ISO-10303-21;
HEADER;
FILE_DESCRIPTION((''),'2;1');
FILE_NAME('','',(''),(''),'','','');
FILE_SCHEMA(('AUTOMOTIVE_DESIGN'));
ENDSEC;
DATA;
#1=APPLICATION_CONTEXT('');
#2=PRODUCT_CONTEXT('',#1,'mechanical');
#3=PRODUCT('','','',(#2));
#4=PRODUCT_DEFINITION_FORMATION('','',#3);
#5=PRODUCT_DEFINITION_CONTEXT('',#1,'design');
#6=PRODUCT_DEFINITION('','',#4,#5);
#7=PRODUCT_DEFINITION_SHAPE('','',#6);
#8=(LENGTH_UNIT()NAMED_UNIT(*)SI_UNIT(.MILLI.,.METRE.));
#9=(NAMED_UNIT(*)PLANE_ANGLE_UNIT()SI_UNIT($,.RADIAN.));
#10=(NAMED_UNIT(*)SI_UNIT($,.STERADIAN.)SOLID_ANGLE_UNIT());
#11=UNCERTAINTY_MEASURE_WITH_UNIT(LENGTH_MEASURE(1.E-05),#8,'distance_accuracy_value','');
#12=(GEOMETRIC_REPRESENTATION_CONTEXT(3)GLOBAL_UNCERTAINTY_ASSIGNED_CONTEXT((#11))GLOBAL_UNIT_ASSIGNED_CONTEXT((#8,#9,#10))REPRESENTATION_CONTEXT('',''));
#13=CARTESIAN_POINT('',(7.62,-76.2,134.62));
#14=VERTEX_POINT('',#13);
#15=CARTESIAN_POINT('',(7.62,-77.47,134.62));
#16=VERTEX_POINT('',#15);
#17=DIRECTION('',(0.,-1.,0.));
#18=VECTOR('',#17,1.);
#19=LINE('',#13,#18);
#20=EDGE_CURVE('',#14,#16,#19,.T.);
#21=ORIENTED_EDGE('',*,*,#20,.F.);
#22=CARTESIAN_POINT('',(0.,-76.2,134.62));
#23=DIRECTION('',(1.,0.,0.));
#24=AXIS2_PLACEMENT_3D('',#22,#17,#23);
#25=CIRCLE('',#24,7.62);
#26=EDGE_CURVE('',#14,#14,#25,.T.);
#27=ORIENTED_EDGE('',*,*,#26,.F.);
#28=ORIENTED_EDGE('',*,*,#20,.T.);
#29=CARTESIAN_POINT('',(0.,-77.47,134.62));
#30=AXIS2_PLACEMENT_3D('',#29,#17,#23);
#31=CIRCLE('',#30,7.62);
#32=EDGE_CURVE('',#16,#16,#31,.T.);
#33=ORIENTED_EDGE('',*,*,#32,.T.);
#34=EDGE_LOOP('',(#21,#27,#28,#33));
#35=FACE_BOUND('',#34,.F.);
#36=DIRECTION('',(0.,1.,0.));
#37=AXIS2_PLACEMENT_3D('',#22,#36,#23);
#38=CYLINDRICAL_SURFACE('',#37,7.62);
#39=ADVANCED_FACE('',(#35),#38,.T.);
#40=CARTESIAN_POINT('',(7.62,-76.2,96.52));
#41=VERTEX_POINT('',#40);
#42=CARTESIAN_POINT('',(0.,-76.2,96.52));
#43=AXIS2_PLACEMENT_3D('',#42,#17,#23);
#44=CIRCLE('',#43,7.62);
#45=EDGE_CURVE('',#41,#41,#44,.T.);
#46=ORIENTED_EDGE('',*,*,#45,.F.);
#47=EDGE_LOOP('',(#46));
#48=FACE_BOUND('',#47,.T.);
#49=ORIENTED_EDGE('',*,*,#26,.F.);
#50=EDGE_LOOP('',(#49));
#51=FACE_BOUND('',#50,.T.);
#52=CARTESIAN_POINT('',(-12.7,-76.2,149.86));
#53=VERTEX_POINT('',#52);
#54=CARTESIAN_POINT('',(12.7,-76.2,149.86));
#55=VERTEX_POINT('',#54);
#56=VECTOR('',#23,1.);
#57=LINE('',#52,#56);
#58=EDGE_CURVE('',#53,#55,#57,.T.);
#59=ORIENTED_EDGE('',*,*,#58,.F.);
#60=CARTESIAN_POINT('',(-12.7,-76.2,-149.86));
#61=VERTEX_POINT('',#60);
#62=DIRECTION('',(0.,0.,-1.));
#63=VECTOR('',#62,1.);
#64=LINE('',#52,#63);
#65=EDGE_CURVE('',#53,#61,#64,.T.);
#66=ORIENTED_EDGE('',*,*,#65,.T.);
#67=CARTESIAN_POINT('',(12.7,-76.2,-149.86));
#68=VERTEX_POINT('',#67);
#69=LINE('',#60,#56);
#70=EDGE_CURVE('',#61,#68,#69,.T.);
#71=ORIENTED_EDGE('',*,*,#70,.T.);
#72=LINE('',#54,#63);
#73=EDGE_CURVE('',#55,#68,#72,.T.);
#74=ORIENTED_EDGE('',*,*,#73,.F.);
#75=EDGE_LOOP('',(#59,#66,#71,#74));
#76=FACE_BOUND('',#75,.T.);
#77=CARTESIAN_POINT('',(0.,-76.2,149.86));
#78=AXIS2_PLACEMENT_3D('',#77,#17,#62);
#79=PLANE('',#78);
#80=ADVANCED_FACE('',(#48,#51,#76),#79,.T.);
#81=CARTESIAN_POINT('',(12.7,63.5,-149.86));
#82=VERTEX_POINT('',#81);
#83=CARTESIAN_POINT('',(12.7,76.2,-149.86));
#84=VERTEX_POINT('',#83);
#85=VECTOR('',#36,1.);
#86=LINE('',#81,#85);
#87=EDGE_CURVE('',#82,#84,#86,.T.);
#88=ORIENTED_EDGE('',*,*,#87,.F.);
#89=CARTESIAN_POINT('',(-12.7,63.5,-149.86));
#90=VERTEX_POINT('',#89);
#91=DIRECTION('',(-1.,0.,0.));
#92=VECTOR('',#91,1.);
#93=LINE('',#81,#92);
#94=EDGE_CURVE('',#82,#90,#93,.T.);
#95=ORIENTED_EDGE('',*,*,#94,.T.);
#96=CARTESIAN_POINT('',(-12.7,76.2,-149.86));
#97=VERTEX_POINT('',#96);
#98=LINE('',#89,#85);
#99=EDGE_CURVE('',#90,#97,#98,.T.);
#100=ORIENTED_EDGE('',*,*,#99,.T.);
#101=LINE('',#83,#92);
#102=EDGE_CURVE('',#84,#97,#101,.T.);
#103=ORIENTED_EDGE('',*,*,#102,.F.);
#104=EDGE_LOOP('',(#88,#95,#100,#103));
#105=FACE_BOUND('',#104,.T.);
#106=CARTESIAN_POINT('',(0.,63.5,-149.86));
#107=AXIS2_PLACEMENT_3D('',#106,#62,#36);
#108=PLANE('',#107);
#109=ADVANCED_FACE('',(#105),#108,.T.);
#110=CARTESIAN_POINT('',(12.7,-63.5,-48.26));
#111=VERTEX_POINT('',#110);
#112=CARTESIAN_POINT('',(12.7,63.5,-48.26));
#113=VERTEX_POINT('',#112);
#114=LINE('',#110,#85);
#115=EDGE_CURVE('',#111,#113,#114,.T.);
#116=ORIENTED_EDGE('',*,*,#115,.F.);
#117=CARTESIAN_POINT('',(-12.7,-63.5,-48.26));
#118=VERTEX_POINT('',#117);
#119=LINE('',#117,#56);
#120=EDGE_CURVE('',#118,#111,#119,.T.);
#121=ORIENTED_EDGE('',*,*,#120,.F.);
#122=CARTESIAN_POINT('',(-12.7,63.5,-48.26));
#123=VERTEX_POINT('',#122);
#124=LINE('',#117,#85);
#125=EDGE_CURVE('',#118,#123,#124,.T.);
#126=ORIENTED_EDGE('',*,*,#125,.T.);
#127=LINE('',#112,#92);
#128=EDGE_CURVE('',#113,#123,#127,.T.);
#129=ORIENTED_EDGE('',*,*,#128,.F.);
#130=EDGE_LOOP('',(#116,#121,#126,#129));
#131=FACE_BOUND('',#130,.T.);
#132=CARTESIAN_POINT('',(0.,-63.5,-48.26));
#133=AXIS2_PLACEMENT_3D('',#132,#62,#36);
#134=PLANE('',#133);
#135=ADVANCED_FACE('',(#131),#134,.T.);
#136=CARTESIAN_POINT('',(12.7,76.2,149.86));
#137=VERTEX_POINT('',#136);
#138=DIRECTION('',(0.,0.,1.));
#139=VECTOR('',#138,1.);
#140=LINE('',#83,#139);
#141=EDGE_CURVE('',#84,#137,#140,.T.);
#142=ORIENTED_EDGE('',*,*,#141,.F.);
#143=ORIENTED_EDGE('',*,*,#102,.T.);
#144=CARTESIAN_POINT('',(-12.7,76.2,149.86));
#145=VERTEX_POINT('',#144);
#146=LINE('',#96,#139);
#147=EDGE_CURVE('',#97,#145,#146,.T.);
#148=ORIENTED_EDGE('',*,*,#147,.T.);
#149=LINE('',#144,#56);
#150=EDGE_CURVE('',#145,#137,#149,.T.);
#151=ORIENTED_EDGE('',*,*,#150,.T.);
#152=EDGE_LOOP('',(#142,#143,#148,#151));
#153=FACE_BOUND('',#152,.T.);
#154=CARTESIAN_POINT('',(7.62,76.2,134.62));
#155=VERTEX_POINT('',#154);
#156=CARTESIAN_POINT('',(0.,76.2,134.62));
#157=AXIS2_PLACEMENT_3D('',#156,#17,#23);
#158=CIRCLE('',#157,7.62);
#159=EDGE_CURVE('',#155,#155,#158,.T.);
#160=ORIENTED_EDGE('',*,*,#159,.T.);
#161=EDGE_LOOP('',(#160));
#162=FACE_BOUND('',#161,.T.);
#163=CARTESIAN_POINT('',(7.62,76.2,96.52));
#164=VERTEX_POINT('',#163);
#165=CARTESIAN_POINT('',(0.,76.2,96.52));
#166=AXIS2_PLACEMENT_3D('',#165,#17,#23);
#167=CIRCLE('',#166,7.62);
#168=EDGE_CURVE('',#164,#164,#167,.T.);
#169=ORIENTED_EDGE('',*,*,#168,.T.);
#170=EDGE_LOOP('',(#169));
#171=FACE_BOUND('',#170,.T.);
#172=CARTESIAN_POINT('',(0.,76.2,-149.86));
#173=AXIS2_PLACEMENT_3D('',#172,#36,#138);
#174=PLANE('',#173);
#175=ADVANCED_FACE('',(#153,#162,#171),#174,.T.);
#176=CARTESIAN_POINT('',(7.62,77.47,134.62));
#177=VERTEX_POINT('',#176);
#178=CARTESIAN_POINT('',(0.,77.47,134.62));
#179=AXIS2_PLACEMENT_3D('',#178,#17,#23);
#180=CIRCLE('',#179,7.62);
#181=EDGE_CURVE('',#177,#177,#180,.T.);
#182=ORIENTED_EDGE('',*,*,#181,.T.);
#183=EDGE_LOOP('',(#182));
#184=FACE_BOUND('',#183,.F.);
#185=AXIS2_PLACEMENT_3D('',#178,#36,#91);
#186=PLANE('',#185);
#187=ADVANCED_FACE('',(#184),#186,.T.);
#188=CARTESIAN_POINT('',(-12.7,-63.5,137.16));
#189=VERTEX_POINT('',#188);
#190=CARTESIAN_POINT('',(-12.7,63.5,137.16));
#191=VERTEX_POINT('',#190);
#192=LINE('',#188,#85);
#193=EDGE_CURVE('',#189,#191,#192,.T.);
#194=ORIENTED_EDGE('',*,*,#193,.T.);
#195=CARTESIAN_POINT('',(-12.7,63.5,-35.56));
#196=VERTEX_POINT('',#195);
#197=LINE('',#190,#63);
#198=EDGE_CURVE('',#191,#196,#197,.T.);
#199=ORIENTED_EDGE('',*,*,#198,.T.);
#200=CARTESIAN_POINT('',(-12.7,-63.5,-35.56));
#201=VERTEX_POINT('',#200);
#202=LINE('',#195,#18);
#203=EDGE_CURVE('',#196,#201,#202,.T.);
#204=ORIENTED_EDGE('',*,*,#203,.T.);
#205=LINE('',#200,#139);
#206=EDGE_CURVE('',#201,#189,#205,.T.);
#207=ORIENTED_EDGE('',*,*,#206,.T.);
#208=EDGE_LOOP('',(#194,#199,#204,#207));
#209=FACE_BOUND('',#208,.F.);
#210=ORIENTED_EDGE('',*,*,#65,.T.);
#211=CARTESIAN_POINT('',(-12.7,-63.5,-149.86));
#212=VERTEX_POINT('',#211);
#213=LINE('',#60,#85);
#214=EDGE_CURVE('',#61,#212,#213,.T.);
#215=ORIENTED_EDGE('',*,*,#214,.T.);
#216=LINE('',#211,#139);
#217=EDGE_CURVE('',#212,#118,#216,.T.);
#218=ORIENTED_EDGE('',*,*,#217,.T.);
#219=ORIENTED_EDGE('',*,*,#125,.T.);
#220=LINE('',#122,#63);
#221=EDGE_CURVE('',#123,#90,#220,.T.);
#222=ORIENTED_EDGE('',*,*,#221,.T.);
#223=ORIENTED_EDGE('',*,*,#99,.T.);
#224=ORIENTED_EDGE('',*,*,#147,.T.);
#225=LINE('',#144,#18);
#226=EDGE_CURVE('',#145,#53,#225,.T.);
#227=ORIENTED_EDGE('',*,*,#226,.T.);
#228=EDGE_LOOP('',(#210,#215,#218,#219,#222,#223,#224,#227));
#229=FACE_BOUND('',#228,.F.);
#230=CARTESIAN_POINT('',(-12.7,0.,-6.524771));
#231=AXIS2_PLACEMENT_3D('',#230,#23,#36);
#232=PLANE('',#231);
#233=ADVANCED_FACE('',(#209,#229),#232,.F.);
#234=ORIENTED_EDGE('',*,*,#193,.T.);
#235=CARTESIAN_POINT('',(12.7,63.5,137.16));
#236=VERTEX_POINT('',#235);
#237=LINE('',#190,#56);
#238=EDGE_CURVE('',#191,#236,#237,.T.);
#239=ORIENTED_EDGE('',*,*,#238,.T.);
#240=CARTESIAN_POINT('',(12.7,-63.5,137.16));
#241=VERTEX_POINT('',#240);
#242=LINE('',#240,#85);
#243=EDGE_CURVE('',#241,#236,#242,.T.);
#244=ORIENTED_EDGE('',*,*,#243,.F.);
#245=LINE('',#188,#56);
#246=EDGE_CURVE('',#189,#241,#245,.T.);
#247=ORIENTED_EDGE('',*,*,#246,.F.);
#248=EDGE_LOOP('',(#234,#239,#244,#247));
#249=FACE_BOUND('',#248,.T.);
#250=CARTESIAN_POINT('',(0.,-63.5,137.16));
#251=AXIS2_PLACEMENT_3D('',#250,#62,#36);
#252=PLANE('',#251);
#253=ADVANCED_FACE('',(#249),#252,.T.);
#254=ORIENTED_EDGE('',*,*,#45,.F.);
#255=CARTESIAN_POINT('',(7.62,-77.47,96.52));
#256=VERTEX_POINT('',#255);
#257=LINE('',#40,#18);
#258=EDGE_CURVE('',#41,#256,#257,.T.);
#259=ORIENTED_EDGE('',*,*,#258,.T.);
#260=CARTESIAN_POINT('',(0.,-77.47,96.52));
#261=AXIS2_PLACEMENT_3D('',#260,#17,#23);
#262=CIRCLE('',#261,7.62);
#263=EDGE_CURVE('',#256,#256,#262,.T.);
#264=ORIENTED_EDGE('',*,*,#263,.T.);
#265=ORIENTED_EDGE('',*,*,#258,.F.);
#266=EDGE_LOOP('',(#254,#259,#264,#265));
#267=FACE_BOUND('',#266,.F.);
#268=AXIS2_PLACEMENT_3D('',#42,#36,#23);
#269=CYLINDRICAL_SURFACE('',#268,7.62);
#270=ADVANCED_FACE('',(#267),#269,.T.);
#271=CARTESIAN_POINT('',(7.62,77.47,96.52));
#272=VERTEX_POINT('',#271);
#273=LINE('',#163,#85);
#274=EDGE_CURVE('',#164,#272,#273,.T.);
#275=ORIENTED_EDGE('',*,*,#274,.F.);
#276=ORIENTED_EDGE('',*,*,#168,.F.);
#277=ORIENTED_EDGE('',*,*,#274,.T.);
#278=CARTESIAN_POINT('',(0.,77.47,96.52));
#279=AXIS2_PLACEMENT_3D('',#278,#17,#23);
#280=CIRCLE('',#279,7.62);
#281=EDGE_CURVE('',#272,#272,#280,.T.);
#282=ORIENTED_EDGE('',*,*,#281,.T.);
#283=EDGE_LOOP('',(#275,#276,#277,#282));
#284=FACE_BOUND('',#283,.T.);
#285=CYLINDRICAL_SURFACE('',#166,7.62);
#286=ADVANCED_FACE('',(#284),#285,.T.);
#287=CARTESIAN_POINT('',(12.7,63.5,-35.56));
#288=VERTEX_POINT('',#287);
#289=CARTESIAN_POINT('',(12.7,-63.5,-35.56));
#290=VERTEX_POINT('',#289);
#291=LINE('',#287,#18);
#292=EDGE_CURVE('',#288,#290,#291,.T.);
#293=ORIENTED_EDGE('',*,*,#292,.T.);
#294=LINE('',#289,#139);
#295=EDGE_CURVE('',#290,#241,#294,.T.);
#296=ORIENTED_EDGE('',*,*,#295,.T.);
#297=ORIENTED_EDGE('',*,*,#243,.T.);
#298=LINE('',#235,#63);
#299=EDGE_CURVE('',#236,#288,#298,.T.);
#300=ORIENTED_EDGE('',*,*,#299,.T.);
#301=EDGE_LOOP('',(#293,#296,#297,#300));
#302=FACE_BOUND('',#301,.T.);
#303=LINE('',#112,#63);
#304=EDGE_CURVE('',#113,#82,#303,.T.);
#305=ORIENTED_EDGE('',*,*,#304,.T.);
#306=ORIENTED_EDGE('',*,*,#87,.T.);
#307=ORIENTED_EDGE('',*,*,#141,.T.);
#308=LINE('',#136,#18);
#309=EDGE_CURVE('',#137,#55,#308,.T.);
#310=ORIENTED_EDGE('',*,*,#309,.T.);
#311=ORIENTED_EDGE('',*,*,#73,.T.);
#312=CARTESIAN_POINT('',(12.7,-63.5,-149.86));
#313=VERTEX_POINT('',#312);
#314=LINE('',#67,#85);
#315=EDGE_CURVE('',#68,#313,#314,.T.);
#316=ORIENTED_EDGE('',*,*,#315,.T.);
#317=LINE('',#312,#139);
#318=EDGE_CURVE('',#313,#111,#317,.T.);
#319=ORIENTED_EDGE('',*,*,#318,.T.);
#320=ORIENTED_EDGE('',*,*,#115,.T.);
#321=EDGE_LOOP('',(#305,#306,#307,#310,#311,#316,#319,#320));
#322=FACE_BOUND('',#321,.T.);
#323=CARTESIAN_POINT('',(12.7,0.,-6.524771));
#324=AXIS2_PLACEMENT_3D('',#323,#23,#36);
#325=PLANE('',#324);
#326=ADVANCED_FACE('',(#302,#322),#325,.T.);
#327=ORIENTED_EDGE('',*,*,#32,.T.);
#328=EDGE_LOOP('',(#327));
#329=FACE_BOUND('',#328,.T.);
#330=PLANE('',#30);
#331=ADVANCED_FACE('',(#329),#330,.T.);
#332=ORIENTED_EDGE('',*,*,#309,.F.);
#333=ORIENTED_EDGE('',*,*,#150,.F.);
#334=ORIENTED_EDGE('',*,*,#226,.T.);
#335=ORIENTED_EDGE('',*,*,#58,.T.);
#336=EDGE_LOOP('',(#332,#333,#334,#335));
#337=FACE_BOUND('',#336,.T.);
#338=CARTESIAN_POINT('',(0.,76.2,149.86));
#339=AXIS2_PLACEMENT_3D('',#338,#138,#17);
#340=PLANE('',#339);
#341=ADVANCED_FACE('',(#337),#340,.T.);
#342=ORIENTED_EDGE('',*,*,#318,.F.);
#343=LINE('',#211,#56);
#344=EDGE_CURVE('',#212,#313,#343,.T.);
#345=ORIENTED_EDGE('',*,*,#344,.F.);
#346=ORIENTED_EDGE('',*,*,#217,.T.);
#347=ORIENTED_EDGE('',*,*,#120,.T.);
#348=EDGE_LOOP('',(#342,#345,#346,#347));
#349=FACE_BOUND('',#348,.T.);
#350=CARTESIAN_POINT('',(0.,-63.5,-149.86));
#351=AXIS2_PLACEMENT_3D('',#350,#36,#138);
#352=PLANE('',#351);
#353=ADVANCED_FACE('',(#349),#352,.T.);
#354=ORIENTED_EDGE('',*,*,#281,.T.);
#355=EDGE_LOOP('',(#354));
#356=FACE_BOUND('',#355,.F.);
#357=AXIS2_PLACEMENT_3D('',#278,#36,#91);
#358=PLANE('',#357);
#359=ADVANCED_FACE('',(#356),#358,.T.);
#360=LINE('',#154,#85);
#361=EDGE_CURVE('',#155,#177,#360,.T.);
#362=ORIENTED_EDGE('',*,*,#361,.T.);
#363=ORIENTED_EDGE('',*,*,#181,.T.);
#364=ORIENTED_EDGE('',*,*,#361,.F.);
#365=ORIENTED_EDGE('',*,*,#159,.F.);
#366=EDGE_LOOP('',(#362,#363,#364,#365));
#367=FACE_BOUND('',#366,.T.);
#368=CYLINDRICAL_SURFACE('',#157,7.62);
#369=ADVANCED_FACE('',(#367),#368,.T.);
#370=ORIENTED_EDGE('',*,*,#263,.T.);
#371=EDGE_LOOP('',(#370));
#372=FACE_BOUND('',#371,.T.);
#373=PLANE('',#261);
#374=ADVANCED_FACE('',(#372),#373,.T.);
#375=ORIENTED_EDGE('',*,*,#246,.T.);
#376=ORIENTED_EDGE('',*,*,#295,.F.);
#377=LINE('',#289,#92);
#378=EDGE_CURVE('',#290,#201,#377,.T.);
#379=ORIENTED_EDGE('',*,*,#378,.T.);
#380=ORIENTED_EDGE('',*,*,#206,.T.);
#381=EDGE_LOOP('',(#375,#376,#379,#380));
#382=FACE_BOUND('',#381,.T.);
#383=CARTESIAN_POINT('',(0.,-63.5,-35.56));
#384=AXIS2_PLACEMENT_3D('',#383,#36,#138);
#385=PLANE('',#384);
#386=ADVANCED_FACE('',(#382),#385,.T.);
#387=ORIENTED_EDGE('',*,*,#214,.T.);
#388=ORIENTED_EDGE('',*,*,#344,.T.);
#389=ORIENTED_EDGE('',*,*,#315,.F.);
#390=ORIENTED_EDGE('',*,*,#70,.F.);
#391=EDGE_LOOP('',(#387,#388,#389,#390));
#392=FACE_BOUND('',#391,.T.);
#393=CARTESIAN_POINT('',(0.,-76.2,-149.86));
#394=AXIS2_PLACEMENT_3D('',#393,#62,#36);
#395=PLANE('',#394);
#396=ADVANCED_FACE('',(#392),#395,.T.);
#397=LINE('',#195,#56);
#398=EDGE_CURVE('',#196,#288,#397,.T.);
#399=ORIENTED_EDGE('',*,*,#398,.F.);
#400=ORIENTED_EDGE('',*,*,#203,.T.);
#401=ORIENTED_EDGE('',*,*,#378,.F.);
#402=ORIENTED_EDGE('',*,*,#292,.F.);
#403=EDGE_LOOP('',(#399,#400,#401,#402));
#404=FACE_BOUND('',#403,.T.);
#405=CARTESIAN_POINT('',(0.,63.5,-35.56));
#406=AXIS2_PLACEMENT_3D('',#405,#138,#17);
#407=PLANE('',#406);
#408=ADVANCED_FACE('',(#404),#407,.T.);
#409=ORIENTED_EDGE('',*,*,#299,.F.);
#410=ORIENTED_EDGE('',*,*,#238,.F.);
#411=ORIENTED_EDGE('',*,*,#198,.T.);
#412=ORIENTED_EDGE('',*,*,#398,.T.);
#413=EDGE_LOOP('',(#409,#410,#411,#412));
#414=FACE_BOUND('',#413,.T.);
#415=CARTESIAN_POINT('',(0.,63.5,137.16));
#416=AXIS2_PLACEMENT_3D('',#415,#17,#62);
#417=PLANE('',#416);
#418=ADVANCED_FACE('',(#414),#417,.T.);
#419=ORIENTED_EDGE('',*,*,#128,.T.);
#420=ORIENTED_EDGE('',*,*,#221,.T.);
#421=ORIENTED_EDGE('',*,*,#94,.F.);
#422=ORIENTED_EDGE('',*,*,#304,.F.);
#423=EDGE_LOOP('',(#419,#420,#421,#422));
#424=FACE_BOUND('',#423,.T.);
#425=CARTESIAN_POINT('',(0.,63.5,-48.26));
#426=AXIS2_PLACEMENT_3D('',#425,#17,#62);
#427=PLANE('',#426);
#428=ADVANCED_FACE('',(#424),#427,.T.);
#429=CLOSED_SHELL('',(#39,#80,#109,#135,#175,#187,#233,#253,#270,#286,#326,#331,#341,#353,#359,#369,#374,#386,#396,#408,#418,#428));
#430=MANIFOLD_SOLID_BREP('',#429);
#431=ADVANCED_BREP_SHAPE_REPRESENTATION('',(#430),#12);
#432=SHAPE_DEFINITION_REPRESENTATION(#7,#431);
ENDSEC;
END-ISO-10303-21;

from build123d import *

# Parameters (mm, degrees)
F1_DEPTH = 12.7
F2_R     = 7.62
F3_DEPTH = 1.27


# Not quite as in the source:
# - a pattern or mirror of a feature is missing from the dataset's text; its kind, count and spacing are read off the source's solid


with BuildPart() as f1:
    # F0 (on Right) → F1 (new body, symmetric)
    with BuildSketch(Plane.YZ):
        Polygon((76.2, -149.86), (76.2, 149.86), (-76.2, 149.86), (-76.2, -149.86), (-63.5, -149.86), (-63.5, -48.26), (63.5, -48.26), (63.5, -149.86), align=None)
        Polygon((-63.5, 137.16), (0, 137.16), (63.5, 137.16), (63.5, -35.56), (-63.5, -35.56), align=None, mode=Mode.SUBTRACT)
    extrude(amount=F1_DEPTH, both=True)

    # F2 (on face) → F3 (join)
    with BuildSketch(Plane.XZ.offset(76.2)):
        with Locations((0, 96.52)):
            Circle(F2_R)
        with Locations((0, 134.62)):
            Circle(F2_R)
    f3 = extrude(amount=F3_DEPTH)

    # F3_copies: F3 across plane
    add(f3.mirror(Plane.ZX))


solid = f1.part
